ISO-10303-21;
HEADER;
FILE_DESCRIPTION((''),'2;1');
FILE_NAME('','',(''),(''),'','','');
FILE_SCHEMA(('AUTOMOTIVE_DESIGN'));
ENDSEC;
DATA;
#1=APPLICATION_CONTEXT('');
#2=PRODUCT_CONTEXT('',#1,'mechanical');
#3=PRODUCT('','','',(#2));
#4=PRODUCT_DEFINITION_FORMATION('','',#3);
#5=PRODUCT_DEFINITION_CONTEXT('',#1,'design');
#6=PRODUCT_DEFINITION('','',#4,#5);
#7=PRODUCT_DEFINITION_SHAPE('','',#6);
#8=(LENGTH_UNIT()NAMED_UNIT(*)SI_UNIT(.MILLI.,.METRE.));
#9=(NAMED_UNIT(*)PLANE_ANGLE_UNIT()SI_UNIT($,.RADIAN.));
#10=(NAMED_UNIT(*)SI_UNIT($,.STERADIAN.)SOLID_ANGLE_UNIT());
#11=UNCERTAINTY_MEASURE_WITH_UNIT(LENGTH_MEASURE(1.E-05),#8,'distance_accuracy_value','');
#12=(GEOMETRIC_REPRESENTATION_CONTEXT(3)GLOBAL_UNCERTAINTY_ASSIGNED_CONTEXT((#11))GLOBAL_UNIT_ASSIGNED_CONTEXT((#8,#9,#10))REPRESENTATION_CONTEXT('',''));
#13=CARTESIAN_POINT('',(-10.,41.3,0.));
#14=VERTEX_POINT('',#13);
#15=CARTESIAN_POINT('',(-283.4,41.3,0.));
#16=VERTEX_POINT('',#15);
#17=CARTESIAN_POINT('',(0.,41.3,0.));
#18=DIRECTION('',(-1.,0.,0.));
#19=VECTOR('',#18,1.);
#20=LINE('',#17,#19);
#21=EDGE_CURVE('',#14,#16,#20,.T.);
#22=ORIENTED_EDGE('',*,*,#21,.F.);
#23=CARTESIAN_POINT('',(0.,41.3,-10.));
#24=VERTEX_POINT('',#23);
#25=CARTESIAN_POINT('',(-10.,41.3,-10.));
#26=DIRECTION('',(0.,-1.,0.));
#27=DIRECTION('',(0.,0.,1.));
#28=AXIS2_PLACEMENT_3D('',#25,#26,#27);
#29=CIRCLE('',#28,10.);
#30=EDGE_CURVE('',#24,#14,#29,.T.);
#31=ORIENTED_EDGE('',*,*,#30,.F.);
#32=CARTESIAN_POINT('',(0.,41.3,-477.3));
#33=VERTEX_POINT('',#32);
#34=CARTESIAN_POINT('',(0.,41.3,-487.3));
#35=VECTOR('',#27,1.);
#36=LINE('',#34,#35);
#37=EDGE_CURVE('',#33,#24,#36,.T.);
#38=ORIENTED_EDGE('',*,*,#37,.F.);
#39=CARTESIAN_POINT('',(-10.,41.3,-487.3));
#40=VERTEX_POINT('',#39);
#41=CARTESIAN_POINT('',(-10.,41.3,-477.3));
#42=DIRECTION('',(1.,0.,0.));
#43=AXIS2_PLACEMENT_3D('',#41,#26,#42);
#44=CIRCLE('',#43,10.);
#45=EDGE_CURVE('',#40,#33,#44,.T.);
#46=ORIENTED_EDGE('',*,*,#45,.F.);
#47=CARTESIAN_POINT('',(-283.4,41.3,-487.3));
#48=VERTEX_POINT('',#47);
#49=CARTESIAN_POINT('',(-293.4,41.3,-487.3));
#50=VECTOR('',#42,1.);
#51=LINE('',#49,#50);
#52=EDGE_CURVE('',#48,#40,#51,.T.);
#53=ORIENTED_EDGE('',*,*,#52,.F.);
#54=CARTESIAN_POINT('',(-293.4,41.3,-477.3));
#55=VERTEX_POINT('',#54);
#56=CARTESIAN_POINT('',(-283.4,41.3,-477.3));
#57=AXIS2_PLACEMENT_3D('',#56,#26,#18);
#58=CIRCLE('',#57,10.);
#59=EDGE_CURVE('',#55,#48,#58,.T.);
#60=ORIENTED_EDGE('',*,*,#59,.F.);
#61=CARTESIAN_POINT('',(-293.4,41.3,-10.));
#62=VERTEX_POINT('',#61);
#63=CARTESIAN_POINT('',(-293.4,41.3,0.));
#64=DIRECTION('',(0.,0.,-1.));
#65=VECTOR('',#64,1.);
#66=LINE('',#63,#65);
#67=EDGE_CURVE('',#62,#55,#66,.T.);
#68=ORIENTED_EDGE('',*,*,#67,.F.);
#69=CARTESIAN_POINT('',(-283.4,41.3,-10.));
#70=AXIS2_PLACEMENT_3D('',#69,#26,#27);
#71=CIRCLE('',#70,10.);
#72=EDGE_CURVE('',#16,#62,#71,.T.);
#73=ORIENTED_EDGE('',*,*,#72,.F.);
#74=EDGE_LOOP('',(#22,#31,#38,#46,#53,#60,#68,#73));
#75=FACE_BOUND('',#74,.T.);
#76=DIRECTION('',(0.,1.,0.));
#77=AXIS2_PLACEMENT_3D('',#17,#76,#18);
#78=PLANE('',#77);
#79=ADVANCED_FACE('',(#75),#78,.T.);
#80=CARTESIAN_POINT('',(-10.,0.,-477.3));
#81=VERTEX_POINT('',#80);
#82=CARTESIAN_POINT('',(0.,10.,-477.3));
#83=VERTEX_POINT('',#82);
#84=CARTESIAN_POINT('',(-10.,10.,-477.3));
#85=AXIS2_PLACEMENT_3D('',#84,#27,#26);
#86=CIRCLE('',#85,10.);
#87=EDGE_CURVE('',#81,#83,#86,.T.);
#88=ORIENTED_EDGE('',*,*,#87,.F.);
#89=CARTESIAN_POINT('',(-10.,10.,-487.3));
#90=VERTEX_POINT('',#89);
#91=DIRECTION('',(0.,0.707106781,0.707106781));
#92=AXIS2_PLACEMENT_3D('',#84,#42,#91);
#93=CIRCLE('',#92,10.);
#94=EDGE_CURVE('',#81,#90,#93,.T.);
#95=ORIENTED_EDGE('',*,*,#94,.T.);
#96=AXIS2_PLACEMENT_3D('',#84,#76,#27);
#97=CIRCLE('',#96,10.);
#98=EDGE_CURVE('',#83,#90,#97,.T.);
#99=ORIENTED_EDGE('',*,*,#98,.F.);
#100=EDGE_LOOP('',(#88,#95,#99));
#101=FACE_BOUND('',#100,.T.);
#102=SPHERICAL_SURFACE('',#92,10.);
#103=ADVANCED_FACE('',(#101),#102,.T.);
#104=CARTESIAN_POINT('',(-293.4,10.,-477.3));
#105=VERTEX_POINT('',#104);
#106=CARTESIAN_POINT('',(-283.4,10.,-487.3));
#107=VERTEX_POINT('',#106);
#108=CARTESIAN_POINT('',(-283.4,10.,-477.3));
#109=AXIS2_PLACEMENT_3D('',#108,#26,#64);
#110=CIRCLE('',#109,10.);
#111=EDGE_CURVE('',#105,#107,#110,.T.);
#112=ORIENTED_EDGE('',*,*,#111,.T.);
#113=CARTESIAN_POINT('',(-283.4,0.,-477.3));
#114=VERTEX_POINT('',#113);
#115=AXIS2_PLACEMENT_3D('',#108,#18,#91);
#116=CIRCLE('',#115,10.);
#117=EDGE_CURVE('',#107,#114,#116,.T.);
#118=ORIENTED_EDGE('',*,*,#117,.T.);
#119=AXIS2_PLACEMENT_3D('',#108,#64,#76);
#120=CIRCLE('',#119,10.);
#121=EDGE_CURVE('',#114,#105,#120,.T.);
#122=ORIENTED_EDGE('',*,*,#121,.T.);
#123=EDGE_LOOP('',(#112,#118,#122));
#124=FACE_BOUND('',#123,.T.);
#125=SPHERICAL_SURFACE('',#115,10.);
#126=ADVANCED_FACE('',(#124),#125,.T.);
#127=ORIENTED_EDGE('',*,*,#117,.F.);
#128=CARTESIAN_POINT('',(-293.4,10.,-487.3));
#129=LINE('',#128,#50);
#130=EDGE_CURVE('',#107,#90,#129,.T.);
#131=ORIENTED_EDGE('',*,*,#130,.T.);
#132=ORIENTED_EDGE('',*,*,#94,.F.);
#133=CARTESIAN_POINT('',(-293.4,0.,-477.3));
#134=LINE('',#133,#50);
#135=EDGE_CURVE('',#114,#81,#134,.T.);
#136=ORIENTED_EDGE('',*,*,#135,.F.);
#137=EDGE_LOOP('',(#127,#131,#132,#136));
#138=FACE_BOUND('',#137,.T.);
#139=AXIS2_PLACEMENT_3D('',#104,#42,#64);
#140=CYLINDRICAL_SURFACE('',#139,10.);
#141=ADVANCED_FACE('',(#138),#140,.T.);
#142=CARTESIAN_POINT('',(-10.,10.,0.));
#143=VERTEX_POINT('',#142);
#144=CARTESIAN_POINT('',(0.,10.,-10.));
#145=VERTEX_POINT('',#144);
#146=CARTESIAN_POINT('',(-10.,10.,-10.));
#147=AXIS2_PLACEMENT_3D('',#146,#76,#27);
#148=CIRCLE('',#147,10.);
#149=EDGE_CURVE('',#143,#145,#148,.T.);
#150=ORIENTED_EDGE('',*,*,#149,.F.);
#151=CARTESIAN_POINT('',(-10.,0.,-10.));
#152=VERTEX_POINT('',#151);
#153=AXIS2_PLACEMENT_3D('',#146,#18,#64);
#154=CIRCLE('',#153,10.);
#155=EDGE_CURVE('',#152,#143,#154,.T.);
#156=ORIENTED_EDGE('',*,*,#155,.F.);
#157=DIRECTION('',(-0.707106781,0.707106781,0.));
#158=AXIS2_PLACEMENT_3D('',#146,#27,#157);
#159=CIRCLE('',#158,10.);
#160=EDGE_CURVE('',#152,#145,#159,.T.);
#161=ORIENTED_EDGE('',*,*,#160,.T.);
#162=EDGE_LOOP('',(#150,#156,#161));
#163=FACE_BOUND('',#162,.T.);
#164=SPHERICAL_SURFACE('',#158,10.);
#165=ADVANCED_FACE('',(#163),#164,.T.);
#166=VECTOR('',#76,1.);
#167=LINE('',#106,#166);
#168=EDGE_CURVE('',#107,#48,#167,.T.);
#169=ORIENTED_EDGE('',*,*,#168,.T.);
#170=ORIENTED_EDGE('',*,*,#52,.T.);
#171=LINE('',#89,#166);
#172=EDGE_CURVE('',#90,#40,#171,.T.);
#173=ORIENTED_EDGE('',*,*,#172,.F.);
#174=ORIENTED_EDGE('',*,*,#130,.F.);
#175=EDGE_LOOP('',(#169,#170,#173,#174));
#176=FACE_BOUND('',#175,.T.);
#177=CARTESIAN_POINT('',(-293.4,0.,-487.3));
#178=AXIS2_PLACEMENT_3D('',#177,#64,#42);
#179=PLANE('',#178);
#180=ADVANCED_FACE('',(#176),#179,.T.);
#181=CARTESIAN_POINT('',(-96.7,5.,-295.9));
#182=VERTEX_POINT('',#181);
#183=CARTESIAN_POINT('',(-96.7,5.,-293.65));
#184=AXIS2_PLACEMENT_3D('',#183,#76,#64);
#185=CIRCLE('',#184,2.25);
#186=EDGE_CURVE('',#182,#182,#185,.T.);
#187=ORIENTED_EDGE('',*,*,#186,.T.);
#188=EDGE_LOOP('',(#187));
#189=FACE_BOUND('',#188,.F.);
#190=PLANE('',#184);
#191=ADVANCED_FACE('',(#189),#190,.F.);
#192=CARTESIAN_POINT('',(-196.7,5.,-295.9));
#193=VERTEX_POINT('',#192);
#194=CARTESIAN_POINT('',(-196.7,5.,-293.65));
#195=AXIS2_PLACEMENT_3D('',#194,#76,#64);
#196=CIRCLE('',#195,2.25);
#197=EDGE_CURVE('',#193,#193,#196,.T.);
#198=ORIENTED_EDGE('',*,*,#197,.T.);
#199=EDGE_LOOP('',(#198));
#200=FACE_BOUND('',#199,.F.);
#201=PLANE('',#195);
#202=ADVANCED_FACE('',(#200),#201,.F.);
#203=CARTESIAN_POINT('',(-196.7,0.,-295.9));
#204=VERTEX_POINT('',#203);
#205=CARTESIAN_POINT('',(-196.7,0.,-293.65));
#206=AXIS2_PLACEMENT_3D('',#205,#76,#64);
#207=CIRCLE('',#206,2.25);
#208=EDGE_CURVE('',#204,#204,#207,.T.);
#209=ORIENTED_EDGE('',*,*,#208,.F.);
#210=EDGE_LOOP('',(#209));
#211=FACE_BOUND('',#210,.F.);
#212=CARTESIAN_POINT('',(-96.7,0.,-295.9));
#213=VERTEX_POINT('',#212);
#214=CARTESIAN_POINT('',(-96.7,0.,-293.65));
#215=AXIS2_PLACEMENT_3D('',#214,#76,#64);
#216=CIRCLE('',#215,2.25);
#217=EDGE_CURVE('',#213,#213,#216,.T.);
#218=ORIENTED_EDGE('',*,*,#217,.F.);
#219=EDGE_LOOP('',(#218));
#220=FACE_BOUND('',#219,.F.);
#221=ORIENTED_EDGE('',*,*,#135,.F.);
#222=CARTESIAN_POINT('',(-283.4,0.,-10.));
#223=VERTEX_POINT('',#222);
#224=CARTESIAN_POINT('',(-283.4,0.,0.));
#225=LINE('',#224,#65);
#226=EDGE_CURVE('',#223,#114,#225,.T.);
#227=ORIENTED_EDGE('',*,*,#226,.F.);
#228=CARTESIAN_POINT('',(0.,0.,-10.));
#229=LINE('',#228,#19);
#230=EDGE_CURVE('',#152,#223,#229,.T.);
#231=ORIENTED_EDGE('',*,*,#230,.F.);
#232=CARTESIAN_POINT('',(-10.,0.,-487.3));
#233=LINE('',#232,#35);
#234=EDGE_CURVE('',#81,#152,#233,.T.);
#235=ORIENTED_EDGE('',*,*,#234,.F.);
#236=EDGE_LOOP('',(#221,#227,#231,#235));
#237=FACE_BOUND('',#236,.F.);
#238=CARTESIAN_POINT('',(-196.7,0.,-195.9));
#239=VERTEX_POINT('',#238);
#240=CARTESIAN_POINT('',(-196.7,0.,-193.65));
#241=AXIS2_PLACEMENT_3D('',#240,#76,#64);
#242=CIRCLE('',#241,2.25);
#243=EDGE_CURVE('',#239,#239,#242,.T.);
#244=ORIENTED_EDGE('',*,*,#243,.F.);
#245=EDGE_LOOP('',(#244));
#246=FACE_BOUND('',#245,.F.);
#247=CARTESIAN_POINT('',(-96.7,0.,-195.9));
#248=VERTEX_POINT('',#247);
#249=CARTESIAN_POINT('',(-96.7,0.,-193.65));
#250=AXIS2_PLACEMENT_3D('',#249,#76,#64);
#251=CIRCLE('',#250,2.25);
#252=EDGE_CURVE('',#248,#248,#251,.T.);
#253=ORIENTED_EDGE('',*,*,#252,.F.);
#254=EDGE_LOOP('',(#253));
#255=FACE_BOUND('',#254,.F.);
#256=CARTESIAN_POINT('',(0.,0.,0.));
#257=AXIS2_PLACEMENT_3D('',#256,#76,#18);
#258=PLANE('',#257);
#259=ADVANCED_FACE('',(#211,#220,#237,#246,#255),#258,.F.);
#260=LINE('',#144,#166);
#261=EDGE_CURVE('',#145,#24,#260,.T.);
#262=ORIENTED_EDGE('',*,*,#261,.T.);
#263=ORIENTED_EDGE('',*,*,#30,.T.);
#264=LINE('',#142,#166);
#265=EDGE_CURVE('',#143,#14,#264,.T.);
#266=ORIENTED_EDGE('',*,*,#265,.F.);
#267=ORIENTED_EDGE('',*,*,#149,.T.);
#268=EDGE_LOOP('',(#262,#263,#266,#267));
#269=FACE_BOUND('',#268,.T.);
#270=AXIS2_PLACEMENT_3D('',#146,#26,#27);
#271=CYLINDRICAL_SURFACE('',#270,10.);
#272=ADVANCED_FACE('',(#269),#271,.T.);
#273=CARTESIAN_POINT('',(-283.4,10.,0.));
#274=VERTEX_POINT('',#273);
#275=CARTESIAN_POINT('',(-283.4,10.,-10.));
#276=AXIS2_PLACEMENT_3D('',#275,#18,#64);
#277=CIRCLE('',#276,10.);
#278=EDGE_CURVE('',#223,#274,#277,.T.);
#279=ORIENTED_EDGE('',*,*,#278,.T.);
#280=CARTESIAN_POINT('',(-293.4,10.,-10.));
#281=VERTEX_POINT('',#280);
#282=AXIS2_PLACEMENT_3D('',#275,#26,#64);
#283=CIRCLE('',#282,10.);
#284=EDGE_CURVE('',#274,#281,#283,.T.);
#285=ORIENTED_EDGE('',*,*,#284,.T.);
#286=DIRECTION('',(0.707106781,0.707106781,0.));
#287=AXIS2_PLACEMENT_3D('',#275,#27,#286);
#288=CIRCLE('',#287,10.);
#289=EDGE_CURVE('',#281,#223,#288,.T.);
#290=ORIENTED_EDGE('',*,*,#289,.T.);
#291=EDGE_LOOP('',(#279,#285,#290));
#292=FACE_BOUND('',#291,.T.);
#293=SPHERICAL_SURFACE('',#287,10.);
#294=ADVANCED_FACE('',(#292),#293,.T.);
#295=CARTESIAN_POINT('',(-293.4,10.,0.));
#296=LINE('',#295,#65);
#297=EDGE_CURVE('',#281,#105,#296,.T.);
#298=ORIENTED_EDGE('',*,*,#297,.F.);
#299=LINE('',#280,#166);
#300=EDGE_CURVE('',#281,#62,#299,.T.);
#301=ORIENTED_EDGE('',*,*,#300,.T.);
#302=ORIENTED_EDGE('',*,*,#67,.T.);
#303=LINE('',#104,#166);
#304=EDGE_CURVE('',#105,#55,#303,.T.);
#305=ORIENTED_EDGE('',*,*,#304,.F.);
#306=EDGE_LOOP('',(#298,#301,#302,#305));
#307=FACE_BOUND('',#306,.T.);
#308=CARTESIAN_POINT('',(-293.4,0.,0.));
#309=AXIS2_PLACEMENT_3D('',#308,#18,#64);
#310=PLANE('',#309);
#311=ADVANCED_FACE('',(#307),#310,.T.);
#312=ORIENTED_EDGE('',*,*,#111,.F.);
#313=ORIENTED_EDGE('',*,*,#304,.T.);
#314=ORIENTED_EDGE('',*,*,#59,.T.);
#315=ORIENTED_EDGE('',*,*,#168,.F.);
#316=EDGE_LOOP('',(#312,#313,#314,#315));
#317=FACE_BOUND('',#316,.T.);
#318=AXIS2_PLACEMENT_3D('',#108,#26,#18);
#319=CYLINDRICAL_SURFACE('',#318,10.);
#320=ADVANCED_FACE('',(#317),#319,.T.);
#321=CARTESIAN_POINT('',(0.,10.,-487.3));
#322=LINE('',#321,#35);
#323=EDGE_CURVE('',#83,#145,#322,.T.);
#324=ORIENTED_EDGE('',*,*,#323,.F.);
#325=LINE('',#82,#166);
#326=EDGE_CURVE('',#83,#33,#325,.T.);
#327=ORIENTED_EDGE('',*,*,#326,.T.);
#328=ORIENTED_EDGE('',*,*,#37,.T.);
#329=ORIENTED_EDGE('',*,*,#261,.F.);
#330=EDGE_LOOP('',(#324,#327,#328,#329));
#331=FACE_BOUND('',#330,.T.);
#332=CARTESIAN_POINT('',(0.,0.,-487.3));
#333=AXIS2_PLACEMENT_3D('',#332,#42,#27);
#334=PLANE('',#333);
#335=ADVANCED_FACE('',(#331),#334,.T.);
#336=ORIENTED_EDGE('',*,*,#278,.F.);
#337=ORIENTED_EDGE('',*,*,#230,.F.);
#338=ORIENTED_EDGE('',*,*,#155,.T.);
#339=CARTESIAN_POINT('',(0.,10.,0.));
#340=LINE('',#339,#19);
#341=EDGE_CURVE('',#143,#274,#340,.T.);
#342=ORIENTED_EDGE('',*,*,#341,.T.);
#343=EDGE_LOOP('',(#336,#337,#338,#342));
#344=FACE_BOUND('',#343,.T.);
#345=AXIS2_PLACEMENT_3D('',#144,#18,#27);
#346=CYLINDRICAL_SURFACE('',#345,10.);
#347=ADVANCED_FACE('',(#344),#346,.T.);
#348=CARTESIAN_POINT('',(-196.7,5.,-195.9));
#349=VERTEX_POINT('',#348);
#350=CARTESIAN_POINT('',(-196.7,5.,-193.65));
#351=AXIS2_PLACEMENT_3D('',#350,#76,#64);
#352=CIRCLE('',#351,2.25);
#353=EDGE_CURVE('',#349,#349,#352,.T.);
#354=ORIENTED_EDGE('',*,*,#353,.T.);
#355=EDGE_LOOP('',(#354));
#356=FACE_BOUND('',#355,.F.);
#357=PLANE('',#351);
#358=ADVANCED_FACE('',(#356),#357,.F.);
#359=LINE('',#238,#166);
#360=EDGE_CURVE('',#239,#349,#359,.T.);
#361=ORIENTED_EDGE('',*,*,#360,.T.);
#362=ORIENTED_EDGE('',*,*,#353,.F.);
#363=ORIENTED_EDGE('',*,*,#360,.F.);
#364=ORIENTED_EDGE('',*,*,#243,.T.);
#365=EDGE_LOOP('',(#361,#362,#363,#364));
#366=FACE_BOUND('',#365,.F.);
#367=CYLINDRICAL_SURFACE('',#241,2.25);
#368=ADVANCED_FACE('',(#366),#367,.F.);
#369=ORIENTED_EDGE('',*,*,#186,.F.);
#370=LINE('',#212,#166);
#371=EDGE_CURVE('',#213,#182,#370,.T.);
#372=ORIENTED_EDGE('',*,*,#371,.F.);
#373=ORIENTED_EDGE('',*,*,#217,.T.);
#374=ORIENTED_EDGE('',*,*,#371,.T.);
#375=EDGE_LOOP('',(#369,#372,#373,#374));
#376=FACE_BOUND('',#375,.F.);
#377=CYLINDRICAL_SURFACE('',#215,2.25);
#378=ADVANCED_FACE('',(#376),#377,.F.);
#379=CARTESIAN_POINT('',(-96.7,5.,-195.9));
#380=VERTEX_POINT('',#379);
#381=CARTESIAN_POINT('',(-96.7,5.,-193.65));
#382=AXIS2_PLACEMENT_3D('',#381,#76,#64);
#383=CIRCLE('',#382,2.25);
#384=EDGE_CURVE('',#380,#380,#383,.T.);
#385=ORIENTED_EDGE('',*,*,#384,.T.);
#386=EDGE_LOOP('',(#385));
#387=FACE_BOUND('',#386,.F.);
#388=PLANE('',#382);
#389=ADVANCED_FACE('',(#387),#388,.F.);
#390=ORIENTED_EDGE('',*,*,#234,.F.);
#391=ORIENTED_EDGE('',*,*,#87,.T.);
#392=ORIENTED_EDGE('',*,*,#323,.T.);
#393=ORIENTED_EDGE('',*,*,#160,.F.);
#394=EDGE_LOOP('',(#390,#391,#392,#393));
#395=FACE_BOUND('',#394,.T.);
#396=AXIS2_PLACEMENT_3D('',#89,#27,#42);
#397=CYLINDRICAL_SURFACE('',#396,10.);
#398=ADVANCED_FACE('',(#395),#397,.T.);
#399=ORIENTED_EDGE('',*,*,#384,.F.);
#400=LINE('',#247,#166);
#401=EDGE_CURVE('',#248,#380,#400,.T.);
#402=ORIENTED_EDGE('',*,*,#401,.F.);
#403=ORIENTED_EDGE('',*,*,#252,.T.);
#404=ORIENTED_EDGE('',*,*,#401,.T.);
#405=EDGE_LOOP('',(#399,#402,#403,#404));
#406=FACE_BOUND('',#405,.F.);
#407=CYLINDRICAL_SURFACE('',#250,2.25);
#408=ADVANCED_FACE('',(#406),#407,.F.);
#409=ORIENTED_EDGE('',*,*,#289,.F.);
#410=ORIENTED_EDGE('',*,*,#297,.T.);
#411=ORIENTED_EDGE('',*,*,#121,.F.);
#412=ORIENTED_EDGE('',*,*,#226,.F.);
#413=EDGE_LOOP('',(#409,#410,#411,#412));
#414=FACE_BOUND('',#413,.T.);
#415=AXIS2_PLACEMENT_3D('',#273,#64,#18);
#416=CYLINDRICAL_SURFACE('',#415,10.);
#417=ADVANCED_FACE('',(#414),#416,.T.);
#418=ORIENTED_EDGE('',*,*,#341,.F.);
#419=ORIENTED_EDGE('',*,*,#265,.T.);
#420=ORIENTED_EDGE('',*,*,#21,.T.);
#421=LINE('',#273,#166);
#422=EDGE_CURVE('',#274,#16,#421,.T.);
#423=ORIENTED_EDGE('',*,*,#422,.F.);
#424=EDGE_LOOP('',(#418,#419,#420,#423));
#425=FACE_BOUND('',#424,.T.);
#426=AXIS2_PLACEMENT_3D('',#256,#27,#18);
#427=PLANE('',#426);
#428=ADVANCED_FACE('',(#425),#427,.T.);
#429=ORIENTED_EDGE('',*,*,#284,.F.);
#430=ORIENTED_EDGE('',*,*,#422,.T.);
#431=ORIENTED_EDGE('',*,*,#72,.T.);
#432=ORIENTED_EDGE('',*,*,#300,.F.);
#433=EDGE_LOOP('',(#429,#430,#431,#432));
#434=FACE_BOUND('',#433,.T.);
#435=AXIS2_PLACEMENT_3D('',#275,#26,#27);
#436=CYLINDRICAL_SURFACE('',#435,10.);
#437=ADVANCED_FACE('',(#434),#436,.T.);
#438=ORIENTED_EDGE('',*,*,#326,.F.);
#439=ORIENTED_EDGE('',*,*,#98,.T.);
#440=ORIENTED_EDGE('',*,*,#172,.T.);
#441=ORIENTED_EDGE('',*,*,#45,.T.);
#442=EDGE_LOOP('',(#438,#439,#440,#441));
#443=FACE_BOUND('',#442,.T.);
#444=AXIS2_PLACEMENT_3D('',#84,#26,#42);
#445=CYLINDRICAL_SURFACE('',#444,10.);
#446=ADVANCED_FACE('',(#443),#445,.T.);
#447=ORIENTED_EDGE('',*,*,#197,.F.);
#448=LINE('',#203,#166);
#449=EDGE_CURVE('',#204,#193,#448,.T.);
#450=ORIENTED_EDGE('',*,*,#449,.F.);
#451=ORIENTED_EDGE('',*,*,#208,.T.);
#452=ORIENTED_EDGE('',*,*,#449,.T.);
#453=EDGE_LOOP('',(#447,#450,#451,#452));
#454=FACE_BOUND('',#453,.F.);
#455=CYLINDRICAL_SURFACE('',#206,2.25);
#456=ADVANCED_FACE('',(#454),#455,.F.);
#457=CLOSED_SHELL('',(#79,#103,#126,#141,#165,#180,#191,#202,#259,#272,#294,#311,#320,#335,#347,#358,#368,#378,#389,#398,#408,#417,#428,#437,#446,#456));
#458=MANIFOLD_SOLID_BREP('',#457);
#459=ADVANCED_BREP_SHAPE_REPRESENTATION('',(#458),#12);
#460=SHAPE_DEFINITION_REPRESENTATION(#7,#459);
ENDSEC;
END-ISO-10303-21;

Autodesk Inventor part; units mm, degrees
ref_plane "YZ Plane" through (0, 0, 0) normal (1, 0, 0) x (0, 1, 0)
ref_plane "XZ Plane" through (0, 0, 0) normal (0, 1, 0) x (-1, 0, 0)
ref_plane "XY Plane" through (0, 0, 0) normal (0, 0, 1) x (1, 0, 0)
sketch "Sketch1" plane through (0, 0, 0) normal (0, 1, 0) x (-1, 0, 0)
  line L0 (0, 0) -> (293.4, 0)
  line L1 (293.4, 0) -> (293.4, -487.3)
  line L2 (293.4, -487.3) -> (0, -487.3)
  line L3 (0, -487.3) -> (0, 0)
  dimension "d0" = 293.4
  dimension "d1" = 487.3
extrude "Extrusion1" add sketch "Sketch1" along normal blind 41.3
fillet "Fillet1" radius 10 4 edges at (0, 0, -243.65) (-146.7, 0, 0) (-293.4, 0, -243.65) (-146.7, 0, -487.3)
fillet "Fillet2" radius 10 8 edges at (-2.9289, 2.9289, -484.3711) (0, 25.65, -487.3) (-290.4711, 2.9289, -484.3711) (-293.4, 25.65, -487.3) (-2.9289, 2.9289, -2.9289) (0, 25.65, 0) (-293.4, 25.65, 0) (-290.4711, 2.9289, -2.9289)
sketch "Sketch2" plane through (0, 0, 0) normal (0, -1, 0) x (1, 0, 0)
  line L0 (-283.4, -487.3) -> (-10, -487.3) projected
  line L1 (-293.4, -10) -> (-293.4, -477.3) projected
  point P0 (0, 0)
  point P1 (-196.7, -293.65)
  point P2 (-196.7, -193.65)
  point P3 (-96.7, -293.65)
  point P4 (-96.7, -193.65)
  dimension "d6" = 193.65
  dimension "d8" = 96.7
  dimension "d9" = 100
  dimension "d10" = 96.7
  dimension "d11" = 193.65
  dimension "d12" = 100
  dimension "d13" = 100
  dimension "d14" = 100
hole "Hole1" at (-196.7, 0, -293.65) at (-196.7, 0, -193.65) at (-96.7, 0, -293.65) at (-96.7, 0, -193.65) direction (0, 1, 0) diameter 4.5 depth 5
equation "\"d10\" = d8"
equation "\"d11\" = d6"
equation "\"d12\" = d9"
equation "\"d13\" = d9"
equation "\"d14\" = d9"
properties part number "Monitor"
